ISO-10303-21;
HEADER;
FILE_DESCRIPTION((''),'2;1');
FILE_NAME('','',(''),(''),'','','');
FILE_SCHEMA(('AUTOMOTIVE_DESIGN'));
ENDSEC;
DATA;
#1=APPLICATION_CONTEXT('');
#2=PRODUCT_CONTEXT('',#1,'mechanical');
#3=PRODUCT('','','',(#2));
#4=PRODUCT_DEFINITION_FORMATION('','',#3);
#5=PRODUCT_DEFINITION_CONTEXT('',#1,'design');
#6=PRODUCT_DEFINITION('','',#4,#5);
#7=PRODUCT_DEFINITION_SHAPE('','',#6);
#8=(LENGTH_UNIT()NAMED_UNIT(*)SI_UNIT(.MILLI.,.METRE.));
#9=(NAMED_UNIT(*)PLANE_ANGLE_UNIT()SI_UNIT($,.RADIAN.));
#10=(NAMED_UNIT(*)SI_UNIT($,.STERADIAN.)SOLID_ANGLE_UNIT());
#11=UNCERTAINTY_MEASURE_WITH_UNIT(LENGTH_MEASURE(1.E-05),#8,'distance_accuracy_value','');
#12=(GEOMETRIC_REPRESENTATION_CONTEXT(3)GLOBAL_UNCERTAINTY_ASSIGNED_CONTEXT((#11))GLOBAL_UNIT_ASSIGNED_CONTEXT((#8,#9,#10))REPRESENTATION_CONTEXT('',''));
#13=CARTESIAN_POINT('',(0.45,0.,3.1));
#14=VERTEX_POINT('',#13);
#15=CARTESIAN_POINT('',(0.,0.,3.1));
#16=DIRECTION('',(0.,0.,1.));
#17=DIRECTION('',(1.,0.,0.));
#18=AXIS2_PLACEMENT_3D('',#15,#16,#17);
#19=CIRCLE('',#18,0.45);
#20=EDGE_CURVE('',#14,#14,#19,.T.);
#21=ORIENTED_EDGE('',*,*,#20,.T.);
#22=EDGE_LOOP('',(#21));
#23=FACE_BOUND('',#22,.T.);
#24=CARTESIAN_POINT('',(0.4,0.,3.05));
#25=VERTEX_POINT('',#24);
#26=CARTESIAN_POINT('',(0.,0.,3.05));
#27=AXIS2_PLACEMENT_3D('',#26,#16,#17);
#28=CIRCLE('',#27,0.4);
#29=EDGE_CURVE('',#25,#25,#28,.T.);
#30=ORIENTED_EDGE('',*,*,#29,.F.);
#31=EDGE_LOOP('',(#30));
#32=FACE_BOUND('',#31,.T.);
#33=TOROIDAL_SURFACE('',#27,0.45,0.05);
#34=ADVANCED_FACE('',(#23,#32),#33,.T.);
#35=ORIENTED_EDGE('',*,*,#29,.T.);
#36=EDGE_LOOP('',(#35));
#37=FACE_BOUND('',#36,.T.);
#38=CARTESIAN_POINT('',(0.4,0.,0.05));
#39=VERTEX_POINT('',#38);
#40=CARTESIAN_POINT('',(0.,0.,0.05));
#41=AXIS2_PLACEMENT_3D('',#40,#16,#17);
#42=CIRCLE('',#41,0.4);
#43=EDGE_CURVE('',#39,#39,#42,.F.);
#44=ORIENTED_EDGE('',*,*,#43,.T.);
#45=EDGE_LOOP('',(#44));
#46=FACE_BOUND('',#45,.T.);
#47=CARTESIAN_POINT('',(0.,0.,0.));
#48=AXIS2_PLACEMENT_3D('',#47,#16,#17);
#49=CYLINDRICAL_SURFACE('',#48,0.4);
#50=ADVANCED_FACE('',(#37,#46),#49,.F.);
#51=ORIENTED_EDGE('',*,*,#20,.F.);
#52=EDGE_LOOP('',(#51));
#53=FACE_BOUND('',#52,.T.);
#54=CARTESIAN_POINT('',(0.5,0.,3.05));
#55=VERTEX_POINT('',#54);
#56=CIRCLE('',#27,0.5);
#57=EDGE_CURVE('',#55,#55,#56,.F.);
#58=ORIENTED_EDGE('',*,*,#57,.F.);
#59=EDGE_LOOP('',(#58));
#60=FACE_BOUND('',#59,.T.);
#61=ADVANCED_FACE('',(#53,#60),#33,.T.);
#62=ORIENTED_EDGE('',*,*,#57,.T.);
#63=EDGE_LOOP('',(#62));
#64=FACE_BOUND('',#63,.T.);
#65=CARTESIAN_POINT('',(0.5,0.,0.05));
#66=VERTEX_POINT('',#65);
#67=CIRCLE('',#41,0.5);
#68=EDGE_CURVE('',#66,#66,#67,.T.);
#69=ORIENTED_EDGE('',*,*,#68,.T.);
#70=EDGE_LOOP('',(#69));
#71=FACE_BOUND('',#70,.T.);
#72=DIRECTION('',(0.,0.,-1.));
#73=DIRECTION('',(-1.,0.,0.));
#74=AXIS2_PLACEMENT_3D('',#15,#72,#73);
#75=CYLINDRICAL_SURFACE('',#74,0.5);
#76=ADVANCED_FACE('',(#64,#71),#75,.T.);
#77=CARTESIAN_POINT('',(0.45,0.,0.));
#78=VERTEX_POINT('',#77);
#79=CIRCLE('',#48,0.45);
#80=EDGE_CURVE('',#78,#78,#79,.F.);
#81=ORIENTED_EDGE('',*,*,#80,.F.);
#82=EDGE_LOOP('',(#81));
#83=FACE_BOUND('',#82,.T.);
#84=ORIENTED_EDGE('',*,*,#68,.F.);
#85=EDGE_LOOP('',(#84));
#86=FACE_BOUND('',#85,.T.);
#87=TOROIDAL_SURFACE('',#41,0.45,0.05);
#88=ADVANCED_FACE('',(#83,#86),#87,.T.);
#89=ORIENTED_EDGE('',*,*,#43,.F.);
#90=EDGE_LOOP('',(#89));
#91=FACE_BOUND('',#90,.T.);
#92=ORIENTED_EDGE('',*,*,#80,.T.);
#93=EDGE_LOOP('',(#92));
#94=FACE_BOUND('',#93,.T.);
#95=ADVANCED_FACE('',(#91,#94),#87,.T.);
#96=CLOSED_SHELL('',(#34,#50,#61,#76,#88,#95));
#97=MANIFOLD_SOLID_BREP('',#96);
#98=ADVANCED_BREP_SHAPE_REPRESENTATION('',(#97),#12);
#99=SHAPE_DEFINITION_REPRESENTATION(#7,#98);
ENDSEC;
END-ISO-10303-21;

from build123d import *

# Parameters (mm, degrees)
SKETCH1_R           = 0.5
BOSS_EXTRUDE1_DEPTH = 3.1
SKETCH2_R           = 0.4
CUT_EXTRUDE1_DEPTH  = 3.1
FILLET1_R           = 0.05
FILLET2_R           = 0.05
FILLET3_R           = 0.05
FILLET4_R           = 0.05


with BuildPart() as part:
    # Sketch1 → Boss-Extrude1 (new body)
    with BuildSketch(Plane.XY):
        Circle(SKETCH1_R)
    extrude(amount=BOSS_EXTRUDE1_DEPTH)

    # Sketch2 → Cut-Extrude1 (cut)
    with BuildSketch(Plane.XY.offset(3.1)):
        Circle(SKETCH2_R)
    extrude(amount=-CUT_EXTRUDE1_DEPTH, mode=Mode.SUBTRACT)

    # Fillet1
    fillet1_edges = [part.edges().sort_by_distance(p)[0] for p in [
        (-0.5, 0, 3.1),
    ]]
    fillet(fillet1_edges, radius=FILLET1_R)

    # Fillet2
    fillet2_edges = [part.edges().sort_by_distance(p)[0] for p in [
        (-0.4, 0, 3.1),
    ]]
    fillet(fillet2_edges, radius=FILLET2_R - 0.0001)  # a hair under: the kernel refuses the full size

    # Fillet3
    fillet3_edges = [part.edges().sort_by_distance(p)[0] for p in [
        (-0.5, 0, 0),
    ]]
    fillet(fillet3_edges, radius=FILLET3_R)

    # Fillet4
    fillet4_edges = [part.edges().sort_by_distance(p)[0] for p in [
        (-0.4, 0, 0),
    ]]
    fillet(fillet4_edges, radius=FILLET4_R - 0.0001)  # a hair under: the kernel refuses the full size


solid = part.part
